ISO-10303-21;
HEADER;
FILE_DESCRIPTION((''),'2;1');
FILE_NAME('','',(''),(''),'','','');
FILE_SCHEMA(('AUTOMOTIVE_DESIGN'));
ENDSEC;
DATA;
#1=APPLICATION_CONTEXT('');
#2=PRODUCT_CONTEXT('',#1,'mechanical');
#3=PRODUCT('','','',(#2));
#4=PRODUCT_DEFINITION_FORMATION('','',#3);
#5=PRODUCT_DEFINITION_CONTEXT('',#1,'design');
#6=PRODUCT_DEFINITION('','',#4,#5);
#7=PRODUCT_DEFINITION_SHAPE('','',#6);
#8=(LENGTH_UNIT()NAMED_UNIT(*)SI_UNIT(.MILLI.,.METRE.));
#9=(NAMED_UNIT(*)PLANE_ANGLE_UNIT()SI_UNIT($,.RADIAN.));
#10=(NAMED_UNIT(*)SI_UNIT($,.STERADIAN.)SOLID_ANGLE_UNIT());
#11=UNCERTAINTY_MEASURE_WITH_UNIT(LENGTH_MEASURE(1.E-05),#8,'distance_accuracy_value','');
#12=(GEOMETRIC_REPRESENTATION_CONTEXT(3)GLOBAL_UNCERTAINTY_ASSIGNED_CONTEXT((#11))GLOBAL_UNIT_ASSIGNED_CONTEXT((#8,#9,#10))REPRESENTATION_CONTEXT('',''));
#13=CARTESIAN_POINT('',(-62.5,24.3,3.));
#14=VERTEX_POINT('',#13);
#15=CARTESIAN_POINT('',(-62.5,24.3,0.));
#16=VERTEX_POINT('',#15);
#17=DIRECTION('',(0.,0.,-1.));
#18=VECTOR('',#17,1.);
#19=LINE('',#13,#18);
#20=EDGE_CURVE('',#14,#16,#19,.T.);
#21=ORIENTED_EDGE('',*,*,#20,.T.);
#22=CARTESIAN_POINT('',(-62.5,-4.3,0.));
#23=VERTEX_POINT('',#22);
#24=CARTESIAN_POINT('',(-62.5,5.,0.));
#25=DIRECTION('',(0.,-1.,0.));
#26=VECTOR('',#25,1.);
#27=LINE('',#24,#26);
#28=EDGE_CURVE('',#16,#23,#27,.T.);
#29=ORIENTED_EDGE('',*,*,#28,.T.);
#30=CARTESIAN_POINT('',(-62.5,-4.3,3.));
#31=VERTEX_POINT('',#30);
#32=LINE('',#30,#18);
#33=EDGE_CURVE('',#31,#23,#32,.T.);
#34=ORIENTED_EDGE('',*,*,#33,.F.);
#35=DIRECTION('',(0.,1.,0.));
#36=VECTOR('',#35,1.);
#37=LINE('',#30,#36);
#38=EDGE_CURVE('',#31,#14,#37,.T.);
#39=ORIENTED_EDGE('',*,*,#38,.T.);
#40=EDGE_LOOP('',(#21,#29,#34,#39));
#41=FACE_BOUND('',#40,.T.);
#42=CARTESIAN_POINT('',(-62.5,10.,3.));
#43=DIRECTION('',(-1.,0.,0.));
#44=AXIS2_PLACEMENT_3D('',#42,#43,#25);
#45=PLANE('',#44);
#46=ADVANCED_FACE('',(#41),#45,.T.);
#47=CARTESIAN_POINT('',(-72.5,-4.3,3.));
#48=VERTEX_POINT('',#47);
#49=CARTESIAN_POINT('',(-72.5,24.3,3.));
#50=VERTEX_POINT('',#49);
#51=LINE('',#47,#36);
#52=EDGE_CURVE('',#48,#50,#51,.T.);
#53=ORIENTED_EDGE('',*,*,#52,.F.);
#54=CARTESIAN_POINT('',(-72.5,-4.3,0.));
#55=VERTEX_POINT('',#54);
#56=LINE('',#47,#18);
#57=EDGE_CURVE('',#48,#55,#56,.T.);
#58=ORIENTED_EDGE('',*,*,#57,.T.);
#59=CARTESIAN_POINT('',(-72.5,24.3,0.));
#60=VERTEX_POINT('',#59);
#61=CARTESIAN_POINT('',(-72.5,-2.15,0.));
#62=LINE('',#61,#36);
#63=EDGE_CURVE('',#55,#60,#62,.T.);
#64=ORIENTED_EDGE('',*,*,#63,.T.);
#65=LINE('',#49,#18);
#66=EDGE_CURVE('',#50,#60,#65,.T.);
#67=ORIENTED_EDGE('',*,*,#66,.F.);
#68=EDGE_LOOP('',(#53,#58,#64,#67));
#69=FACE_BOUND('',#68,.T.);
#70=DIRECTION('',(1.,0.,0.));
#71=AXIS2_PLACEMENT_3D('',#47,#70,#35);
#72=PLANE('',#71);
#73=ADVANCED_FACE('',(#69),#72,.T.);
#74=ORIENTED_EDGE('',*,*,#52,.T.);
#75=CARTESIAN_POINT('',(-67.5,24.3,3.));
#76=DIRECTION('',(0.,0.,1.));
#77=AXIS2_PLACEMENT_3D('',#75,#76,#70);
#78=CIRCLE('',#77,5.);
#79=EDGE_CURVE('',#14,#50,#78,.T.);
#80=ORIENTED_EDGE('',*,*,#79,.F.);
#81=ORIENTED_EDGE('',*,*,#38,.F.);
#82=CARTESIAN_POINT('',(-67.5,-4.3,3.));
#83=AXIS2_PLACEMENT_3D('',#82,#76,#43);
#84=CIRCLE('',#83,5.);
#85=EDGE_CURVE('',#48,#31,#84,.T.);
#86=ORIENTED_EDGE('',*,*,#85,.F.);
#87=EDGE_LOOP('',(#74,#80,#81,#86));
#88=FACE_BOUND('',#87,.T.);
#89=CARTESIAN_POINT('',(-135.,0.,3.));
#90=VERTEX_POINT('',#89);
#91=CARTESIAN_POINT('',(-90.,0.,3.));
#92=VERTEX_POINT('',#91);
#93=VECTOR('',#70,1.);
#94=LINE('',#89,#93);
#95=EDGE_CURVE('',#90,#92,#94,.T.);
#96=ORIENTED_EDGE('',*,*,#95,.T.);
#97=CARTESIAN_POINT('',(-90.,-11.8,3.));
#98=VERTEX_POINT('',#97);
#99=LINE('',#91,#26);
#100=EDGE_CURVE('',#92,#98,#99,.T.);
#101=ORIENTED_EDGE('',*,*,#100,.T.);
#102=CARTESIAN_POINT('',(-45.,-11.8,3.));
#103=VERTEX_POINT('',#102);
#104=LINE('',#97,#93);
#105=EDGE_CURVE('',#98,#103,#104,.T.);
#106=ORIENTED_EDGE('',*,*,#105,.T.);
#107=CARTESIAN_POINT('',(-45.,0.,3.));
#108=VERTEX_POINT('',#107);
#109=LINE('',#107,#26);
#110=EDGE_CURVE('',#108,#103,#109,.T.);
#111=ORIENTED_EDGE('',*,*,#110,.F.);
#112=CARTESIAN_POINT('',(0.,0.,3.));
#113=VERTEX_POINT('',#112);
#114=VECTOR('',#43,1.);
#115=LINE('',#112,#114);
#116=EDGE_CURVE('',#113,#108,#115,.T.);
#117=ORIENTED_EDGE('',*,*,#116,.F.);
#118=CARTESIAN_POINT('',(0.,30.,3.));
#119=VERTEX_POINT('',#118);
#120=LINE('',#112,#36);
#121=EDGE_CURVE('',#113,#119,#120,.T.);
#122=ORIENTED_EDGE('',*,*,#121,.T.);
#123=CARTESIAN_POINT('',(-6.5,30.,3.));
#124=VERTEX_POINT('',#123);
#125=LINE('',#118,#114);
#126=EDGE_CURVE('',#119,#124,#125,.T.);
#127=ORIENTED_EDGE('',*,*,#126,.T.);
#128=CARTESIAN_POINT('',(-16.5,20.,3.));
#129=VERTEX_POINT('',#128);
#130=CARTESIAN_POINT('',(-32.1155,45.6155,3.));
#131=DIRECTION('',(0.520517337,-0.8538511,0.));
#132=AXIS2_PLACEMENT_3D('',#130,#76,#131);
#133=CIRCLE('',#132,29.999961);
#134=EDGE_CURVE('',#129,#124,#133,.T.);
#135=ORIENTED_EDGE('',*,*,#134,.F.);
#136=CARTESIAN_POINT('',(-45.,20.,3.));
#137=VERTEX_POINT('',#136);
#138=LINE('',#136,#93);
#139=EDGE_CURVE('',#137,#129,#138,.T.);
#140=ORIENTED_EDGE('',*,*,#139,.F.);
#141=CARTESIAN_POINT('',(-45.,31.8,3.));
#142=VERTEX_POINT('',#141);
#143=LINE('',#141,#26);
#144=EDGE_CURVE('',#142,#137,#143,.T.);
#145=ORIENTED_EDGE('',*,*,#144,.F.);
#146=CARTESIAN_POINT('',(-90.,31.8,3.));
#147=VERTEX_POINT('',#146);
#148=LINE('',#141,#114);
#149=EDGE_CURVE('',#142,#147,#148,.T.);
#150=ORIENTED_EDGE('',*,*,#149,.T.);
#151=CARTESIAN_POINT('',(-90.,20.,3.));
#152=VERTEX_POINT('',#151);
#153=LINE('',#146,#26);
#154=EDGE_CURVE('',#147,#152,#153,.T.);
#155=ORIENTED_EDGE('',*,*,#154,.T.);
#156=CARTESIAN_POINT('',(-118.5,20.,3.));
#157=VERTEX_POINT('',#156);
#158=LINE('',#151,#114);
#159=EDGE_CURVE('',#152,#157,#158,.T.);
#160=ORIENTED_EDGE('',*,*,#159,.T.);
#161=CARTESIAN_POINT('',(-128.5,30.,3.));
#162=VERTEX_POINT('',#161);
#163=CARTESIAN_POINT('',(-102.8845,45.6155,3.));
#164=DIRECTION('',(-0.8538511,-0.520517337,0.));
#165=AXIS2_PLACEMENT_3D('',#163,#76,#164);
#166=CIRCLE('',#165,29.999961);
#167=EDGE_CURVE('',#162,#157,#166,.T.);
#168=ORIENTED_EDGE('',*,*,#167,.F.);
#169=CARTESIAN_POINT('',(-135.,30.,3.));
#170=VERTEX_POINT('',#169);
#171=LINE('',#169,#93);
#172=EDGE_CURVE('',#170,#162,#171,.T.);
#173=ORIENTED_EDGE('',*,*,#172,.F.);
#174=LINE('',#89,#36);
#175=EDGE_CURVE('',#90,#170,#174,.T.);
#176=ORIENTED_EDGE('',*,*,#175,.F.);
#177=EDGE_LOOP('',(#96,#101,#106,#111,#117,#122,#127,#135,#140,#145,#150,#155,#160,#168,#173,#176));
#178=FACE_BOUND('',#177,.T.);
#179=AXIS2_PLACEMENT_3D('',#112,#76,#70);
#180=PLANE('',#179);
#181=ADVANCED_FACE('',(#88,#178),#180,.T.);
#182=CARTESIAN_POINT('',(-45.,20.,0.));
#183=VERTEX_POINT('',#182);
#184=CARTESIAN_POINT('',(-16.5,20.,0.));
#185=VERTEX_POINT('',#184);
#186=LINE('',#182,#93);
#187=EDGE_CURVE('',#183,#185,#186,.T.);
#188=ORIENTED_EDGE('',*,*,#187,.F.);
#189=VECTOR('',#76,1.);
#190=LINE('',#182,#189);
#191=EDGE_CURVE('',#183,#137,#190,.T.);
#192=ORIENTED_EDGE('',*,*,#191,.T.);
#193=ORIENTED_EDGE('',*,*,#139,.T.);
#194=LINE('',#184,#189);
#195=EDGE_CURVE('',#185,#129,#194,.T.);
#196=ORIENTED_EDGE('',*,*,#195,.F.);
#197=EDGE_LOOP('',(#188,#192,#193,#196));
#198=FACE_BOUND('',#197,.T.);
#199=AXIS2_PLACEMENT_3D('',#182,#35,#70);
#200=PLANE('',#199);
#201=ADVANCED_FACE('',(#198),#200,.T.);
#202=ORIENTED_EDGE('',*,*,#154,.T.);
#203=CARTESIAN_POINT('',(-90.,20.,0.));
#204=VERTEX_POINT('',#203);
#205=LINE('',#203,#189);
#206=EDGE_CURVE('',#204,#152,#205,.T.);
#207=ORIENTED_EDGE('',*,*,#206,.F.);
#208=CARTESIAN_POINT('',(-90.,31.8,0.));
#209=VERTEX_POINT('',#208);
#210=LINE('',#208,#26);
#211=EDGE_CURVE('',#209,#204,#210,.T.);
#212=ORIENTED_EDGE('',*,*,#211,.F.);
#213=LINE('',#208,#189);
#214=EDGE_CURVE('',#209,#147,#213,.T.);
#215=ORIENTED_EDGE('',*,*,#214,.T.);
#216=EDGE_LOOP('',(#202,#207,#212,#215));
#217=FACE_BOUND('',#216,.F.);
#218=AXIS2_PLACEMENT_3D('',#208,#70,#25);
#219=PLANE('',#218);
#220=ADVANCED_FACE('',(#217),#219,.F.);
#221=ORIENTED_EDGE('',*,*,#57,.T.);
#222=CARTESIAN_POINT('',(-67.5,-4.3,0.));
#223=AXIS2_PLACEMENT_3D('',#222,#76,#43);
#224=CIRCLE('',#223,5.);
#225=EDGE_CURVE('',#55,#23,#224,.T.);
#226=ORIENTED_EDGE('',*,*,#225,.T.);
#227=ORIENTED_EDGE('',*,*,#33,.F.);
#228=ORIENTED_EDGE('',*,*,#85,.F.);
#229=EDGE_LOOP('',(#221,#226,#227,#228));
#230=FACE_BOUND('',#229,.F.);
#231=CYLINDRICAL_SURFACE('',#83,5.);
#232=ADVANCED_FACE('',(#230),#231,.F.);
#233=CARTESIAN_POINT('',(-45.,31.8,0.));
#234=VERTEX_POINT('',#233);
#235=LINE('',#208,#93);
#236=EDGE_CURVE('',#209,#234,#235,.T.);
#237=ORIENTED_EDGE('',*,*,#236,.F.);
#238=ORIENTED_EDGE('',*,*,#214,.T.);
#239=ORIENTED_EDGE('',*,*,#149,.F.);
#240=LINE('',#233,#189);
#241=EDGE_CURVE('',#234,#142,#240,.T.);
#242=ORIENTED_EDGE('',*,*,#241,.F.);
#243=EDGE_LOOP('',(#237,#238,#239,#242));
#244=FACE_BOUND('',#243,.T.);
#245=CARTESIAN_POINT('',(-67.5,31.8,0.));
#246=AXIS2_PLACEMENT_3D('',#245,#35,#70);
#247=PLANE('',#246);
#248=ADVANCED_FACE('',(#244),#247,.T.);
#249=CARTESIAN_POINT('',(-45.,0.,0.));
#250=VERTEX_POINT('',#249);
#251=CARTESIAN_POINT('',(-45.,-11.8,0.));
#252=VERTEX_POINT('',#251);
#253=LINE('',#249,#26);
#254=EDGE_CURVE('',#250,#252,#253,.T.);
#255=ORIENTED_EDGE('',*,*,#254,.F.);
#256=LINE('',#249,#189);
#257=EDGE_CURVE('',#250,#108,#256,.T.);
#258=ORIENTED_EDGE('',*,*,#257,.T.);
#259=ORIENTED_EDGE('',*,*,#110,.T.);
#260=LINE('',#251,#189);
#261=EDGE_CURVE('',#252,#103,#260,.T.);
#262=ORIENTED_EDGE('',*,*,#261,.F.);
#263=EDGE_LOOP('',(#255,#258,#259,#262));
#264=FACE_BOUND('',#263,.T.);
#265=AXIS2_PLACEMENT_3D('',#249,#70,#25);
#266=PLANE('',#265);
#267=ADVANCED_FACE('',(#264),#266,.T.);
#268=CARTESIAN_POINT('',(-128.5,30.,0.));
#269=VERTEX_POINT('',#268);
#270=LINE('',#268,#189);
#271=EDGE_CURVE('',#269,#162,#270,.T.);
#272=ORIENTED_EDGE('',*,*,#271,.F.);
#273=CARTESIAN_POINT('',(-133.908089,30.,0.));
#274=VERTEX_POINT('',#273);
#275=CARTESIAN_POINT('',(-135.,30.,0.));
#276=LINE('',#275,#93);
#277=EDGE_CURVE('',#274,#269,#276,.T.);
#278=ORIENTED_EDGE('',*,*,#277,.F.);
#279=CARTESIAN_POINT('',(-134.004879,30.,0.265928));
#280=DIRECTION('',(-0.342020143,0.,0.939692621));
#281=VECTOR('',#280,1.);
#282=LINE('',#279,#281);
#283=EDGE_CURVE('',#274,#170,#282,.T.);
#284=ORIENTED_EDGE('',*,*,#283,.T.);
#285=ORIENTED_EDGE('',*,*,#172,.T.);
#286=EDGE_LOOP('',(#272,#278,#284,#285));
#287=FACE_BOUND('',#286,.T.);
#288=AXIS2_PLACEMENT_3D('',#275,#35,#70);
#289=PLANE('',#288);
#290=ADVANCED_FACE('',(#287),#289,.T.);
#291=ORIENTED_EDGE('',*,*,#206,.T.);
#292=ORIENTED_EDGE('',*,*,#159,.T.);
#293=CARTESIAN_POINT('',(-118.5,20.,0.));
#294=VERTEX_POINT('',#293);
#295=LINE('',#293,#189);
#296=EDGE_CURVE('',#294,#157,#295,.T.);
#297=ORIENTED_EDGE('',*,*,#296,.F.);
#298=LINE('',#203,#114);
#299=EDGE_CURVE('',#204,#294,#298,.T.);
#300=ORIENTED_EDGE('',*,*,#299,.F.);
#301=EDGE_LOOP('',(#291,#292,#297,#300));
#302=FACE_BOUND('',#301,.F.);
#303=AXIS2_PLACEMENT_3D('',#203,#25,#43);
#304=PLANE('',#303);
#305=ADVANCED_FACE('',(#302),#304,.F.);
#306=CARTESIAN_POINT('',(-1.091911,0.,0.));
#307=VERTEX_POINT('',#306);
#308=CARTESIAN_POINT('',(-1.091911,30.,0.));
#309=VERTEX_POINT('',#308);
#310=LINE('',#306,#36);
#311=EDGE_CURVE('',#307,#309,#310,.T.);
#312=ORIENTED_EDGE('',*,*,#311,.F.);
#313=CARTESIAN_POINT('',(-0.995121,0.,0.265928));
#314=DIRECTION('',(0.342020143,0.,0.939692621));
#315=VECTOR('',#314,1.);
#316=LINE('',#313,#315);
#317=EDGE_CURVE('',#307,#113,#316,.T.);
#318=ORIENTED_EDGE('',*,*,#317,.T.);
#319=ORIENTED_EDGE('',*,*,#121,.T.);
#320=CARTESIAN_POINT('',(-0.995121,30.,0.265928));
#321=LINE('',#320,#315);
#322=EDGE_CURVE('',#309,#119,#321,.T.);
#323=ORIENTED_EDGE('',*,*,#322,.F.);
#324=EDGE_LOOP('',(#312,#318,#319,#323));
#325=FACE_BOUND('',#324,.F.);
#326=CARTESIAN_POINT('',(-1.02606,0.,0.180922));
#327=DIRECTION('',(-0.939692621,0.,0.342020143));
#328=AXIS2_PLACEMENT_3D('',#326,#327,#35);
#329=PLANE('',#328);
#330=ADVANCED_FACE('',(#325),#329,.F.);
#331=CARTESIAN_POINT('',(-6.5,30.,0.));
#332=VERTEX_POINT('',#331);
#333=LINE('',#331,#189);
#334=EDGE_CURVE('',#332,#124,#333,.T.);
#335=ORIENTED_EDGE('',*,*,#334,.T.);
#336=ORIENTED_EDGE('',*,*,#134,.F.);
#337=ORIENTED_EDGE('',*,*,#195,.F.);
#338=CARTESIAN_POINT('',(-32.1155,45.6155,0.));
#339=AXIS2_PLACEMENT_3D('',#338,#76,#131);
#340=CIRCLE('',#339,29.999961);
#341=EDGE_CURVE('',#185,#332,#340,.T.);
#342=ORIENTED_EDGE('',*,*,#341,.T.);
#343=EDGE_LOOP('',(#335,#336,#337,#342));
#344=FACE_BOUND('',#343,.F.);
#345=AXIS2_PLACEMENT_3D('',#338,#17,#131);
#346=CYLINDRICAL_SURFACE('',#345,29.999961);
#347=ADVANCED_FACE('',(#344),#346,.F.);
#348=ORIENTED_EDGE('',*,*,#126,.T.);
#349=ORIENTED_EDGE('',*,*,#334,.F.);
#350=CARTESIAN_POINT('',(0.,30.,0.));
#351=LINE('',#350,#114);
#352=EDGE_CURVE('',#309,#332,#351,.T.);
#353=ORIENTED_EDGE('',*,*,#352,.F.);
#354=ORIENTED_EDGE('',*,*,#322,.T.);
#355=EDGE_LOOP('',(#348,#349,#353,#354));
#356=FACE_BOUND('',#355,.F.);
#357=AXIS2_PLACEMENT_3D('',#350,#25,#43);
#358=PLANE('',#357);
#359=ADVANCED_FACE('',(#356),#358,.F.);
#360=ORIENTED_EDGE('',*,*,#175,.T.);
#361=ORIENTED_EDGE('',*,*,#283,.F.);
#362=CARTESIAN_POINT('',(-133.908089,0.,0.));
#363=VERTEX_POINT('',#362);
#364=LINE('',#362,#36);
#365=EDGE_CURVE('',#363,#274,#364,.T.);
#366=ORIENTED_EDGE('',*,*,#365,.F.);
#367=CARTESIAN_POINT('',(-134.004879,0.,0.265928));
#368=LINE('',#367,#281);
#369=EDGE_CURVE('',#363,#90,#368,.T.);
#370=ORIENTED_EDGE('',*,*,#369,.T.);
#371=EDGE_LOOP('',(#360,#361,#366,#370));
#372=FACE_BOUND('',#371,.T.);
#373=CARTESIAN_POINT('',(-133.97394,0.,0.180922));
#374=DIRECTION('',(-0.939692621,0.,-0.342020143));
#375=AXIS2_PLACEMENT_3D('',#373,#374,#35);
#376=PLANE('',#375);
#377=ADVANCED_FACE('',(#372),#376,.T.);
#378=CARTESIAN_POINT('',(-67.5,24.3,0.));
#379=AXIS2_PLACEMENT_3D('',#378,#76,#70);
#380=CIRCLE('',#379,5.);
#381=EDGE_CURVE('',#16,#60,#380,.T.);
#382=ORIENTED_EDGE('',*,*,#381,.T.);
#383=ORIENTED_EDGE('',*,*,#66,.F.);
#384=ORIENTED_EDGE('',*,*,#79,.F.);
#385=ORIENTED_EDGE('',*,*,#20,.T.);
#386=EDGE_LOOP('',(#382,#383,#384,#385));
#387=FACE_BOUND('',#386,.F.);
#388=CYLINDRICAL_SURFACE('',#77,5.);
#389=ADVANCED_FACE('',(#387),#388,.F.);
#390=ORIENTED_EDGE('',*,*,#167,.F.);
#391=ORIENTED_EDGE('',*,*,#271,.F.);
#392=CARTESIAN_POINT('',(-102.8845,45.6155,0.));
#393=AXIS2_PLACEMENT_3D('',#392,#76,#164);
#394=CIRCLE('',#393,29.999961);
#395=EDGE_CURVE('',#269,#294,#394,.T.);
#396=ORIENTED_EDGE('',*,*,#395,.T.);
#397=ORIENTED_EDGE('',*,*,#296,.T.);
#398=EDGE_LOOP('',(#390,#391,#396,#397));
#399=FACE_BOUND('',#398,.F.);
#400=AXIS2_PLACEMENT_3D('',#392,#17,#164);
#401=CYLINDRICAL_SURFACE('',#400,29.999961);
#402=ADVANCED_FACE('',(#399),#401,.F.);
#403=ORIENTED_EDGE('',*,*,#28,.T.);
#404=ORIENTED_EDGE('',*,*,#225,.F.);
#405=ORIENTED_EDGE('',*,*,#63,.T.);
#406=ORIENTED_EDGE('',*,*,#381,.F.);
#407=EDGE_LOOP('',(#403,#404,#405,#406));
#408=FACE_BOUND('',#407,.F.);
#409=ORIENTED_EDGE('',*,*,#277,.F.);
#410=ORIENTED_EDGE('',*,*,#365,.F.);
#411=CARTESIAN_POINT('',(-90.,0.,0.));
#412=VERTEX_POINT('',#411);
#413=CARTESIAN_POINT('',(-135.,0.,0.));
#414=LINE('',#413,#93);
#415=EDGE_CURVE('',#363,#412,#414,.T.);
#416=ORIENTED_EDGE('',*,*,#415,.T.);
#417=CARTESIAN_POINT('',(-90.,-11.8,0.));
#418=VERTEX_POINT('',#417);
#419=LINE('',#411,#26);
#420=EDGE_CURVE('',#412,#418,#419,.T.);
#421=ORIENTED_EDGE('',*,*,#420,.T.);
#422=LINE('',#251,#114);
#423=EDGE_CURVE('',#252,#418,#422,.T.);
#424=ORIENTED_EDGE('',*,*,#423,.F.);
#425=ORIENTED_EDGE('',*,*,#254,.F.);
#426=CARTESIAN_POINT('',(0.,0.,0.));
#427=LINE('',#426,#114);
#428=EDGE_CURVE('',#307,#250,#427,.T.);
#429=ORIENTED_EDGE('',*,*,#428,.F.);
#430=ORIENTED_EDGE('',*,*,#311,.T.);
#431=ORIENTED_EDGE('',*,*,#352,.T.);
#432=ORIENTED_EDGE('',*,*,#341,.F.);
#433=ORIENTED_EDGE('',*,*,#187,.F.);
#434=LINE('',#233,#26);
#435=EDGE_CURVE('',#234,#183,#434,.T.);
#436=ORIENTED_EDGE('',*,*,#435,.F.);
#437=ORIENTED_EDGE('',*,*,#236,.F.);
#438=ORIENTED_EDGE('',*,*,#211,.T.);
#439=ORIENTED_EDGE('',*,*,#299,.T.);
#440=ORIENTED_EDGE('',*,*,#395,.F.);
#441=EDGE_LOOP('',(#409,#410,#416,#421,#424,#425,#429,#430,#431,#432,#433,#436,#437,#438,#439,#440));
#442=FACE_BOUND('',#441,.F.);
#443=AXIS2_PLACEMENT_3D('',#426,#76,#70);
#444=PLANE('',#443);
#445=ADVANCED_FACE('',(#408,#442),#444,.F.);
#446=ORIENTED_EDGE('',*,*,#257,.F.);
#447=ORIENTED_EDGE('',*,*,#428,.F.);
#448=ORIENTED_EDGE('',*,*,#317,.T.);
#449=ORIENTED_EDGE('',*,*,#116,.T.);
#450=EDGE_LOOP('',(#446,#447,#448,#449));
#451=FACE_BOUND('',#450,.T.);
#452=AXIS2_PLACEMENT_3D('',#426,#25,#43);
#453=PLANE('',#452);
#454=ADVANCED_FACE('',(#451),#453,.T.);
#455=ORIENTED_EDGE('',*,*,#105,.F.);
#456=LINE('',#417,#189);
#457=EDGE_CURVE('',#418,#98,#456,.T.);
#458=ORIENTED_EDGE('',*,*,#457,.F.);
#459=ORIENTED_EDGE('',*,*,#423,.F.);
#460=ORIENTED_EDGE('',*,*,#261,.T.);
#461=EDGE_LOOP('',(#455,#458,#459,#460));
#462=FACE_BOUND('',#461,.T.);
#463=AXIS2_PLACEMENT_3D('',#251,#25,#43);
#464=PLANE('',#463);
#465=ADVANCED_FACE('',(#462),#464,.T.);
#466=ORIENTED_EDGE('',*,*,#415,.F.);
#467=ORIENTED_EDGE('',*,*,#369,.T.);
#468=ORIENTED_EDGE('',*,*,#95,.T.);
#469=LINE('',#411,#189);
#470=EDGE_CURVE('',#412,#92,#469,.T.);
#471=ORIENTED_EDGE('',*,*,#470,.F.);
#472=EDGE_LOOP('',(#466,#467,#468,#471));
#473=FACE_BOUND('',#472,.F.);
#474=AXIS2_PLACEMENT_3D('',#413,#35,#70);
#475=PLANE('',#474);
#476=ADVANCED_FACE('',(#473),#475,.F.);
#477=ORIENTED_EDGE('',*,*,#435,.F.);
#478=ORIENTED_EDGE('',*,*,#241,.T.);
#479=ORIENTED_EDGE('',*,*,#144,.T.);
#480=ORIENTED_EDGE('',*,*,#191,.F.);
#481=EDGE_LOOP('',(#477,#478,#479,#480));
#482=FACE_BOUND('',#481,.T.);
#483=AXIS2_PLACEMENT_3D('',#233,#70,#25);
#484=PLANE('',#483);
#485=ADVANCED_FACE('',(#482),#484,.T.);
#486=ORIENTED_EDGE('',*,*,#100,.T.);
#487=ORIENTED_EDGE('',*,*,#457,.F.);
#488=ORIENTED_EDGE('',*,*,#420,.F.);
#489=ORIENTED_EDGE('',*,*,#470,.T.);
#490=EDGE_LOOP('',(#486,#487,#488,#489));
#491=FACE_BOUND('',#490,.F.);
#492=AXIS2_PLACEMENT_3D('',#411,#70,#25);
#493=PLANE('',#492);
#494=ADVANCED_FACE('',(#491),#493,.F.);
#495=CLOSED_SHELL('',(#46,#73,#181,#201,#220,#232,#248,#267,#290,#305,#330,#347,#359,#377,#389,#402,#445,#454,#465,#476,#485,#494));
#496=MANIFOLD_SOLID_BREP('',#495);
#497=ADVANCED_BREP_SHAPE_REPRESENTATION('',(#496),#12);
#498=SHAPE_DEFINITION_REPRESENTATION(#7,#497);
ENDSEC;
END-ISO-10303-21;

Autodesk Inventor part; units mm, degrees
ref_plane "YZ Plane" through (0, 0, 0) normal (1, 0, 0) x (0, 1, 0)
ref_plane "XZ Plane" through (0, 0, 0) normal (0, 1, 0) x (-1, 0, 0)
ref_plane "XY Plane" through (0, 0, 0) normal (0, 0, 1) x (1, 0, 0)
sketch "Sketch1" plane through (0, 0, 0) normal (0, 0, 1) x (1, 0, 0)
  line L0 (0, 0) -> (0, 30)
  line L1 (0, 30) -> (-6.5, 30)
  line L2 (0, 0) -> (-45, 0)
  line L3 (-45, 0) -> (-45, -11.8)
  line L4 (-45, -11.8) -> (-67.5, -11.8)
  line L5 (-67.5, -11.8) -> (-67.5, 31.8)
  line L6 (-67.5, 31.8) -> (-45, 31.8)
  line L7 (-45, 31.8) -> (-45, 20)
  line L8 (-45, 20) -> (-16.5, 20)
  arc A0 (-16.5, 20) -> (-6.5, 30) centre (-32.1155, 45.6155) ccw
  line L9 (-135, 0) -> (-135, 30)
  line L10 (-135, 30) -> (-128.5, 30)
  line L11 (-135, 0) -> (-90, 0)
  line L12 (-90, 0) -> (-90, -11.8)
  line L13 (-90, -11.8) -> (-67.5, -11.8)
  line L14 (-67.5, 31.8) -> (-90, 31.8)
  line L15 (-90, 31.8) -> (-90, 20)
  line L16 (-90, 20) -> (-118.5, 20)
  arc A1 (-128.5, 30) -> (-118.5, 20) centre (-102.8845, 45.6155) ccw
  dimension "d16" = 10
  dimension "d17" = 30
  dimension "d18" = 6.5
  dimension "d19" = 10
  dimension "d20" = 20
  dimension "d23" = 45
  dimension "d24" = 135
  dimension "d25" = 43.6
extrude "Body" add sketch "Sketch1" along normal blind 3
sketch "Sketch2" plane through (0, 0, 3) normal (0, 0, 1) x (1, 0, 0)
  line L0 (-72.5, -4.3) -> (-72.5, 24.3)
  arc A0 (-62.5, 24.3) -> (-72.5, 24.3) centre (-67.5, 24.3) ccw
  line L1 (-62.5, 24.3) -> (-62.5, -4.3)
  arc A1 (-72.5, -4.3) -> (-62.5, -4.3) centre (-67.5, -4.3) ccw
  line L2 (-16.5, 20) -> (-45, 20) projected
  line L3 (0, 0) -> (0, 30) projected
  line L4 (-45, -11.8) -> (-45, 0) projected
  line L5 (-45, 20) -> (-45, 0)
  line L6 (-131.212, 10) -> (6.3115, 10)
  point P0 (-62.5, 10)
  point P1 (-45, 10)
  dimension "d28" = 28.6
  dimension "d30" = 62.5
  dimension "d31" = 10
extrude "Extrusion2" cut sketch "Sketch2" against normal through all
draft "FaceDraft1" angle -20 pull direction (0, 0, 1) faces at (0, 10, 1) fixed edges at (0, 15, 3)
draft "FaceDraft2" angle -20 pull direction (0, 0, 1) faces at (-135, 20, 1) fixed edges at (-135, 15, 3)
equation "\"d16\" = deslizador_interruptor_largo"
equation "\"d17\" = deslizador_interruptor_angulo"
equation "\"d18\" = deslizador_interruptor_separacion"
equation "\"d19\" = deslizador_interruptor_ancho"
equation "\"d20\" = deslizador_ancho"
equation "\"d23\" = deslizador_apoyo_largo"
equation "\"d24\" = deslizador_largo"
equation "\"d25\" = deslizador_ancho + 2 * deslizador_apoyo_ancho"
equation "\"d26\" = deslizador_grosor"
equation "\"d28\" = deslizador_eje_movimiento"
equation "\"d30\" = deslizador_eje_separacion"
equation "\"d31\" = deslizador_eje_ancho"
equation "\"d34\" = tirador_deslizador_agarre"
equation "\"d35\" = tirador_deslizador_agarre"
equation "\"deslizador_interruptor_largo\" = 10"
equation "\"deslizador_interruptor_angulo\" = 30"
equation "\"deslizador_interruptor_separacion\" = 6.5"
equation "\"deslizador_interruptor_ancho\" = 10"
equation "\"deslizador_ancho\" = 20"
equation "\"deslizador_apoyo_largo\" = 45"
equation "\"deslizador_largo\" = 135"
equation "\"deslizador_apoyo_ancho\" = 11.8"
equation "\"deslizador_grosor\" = 3"
equation "\"deslizador_eje_movimiento\" = 28.6"
equation "\"deslizador_eje_separacion\" = 62.5"
equation "\"deslizador_eje_ancho\" = 10"
equation "\"tirador_deslizador_agarre\" = -20deg"
properties part number "Deslizador"
